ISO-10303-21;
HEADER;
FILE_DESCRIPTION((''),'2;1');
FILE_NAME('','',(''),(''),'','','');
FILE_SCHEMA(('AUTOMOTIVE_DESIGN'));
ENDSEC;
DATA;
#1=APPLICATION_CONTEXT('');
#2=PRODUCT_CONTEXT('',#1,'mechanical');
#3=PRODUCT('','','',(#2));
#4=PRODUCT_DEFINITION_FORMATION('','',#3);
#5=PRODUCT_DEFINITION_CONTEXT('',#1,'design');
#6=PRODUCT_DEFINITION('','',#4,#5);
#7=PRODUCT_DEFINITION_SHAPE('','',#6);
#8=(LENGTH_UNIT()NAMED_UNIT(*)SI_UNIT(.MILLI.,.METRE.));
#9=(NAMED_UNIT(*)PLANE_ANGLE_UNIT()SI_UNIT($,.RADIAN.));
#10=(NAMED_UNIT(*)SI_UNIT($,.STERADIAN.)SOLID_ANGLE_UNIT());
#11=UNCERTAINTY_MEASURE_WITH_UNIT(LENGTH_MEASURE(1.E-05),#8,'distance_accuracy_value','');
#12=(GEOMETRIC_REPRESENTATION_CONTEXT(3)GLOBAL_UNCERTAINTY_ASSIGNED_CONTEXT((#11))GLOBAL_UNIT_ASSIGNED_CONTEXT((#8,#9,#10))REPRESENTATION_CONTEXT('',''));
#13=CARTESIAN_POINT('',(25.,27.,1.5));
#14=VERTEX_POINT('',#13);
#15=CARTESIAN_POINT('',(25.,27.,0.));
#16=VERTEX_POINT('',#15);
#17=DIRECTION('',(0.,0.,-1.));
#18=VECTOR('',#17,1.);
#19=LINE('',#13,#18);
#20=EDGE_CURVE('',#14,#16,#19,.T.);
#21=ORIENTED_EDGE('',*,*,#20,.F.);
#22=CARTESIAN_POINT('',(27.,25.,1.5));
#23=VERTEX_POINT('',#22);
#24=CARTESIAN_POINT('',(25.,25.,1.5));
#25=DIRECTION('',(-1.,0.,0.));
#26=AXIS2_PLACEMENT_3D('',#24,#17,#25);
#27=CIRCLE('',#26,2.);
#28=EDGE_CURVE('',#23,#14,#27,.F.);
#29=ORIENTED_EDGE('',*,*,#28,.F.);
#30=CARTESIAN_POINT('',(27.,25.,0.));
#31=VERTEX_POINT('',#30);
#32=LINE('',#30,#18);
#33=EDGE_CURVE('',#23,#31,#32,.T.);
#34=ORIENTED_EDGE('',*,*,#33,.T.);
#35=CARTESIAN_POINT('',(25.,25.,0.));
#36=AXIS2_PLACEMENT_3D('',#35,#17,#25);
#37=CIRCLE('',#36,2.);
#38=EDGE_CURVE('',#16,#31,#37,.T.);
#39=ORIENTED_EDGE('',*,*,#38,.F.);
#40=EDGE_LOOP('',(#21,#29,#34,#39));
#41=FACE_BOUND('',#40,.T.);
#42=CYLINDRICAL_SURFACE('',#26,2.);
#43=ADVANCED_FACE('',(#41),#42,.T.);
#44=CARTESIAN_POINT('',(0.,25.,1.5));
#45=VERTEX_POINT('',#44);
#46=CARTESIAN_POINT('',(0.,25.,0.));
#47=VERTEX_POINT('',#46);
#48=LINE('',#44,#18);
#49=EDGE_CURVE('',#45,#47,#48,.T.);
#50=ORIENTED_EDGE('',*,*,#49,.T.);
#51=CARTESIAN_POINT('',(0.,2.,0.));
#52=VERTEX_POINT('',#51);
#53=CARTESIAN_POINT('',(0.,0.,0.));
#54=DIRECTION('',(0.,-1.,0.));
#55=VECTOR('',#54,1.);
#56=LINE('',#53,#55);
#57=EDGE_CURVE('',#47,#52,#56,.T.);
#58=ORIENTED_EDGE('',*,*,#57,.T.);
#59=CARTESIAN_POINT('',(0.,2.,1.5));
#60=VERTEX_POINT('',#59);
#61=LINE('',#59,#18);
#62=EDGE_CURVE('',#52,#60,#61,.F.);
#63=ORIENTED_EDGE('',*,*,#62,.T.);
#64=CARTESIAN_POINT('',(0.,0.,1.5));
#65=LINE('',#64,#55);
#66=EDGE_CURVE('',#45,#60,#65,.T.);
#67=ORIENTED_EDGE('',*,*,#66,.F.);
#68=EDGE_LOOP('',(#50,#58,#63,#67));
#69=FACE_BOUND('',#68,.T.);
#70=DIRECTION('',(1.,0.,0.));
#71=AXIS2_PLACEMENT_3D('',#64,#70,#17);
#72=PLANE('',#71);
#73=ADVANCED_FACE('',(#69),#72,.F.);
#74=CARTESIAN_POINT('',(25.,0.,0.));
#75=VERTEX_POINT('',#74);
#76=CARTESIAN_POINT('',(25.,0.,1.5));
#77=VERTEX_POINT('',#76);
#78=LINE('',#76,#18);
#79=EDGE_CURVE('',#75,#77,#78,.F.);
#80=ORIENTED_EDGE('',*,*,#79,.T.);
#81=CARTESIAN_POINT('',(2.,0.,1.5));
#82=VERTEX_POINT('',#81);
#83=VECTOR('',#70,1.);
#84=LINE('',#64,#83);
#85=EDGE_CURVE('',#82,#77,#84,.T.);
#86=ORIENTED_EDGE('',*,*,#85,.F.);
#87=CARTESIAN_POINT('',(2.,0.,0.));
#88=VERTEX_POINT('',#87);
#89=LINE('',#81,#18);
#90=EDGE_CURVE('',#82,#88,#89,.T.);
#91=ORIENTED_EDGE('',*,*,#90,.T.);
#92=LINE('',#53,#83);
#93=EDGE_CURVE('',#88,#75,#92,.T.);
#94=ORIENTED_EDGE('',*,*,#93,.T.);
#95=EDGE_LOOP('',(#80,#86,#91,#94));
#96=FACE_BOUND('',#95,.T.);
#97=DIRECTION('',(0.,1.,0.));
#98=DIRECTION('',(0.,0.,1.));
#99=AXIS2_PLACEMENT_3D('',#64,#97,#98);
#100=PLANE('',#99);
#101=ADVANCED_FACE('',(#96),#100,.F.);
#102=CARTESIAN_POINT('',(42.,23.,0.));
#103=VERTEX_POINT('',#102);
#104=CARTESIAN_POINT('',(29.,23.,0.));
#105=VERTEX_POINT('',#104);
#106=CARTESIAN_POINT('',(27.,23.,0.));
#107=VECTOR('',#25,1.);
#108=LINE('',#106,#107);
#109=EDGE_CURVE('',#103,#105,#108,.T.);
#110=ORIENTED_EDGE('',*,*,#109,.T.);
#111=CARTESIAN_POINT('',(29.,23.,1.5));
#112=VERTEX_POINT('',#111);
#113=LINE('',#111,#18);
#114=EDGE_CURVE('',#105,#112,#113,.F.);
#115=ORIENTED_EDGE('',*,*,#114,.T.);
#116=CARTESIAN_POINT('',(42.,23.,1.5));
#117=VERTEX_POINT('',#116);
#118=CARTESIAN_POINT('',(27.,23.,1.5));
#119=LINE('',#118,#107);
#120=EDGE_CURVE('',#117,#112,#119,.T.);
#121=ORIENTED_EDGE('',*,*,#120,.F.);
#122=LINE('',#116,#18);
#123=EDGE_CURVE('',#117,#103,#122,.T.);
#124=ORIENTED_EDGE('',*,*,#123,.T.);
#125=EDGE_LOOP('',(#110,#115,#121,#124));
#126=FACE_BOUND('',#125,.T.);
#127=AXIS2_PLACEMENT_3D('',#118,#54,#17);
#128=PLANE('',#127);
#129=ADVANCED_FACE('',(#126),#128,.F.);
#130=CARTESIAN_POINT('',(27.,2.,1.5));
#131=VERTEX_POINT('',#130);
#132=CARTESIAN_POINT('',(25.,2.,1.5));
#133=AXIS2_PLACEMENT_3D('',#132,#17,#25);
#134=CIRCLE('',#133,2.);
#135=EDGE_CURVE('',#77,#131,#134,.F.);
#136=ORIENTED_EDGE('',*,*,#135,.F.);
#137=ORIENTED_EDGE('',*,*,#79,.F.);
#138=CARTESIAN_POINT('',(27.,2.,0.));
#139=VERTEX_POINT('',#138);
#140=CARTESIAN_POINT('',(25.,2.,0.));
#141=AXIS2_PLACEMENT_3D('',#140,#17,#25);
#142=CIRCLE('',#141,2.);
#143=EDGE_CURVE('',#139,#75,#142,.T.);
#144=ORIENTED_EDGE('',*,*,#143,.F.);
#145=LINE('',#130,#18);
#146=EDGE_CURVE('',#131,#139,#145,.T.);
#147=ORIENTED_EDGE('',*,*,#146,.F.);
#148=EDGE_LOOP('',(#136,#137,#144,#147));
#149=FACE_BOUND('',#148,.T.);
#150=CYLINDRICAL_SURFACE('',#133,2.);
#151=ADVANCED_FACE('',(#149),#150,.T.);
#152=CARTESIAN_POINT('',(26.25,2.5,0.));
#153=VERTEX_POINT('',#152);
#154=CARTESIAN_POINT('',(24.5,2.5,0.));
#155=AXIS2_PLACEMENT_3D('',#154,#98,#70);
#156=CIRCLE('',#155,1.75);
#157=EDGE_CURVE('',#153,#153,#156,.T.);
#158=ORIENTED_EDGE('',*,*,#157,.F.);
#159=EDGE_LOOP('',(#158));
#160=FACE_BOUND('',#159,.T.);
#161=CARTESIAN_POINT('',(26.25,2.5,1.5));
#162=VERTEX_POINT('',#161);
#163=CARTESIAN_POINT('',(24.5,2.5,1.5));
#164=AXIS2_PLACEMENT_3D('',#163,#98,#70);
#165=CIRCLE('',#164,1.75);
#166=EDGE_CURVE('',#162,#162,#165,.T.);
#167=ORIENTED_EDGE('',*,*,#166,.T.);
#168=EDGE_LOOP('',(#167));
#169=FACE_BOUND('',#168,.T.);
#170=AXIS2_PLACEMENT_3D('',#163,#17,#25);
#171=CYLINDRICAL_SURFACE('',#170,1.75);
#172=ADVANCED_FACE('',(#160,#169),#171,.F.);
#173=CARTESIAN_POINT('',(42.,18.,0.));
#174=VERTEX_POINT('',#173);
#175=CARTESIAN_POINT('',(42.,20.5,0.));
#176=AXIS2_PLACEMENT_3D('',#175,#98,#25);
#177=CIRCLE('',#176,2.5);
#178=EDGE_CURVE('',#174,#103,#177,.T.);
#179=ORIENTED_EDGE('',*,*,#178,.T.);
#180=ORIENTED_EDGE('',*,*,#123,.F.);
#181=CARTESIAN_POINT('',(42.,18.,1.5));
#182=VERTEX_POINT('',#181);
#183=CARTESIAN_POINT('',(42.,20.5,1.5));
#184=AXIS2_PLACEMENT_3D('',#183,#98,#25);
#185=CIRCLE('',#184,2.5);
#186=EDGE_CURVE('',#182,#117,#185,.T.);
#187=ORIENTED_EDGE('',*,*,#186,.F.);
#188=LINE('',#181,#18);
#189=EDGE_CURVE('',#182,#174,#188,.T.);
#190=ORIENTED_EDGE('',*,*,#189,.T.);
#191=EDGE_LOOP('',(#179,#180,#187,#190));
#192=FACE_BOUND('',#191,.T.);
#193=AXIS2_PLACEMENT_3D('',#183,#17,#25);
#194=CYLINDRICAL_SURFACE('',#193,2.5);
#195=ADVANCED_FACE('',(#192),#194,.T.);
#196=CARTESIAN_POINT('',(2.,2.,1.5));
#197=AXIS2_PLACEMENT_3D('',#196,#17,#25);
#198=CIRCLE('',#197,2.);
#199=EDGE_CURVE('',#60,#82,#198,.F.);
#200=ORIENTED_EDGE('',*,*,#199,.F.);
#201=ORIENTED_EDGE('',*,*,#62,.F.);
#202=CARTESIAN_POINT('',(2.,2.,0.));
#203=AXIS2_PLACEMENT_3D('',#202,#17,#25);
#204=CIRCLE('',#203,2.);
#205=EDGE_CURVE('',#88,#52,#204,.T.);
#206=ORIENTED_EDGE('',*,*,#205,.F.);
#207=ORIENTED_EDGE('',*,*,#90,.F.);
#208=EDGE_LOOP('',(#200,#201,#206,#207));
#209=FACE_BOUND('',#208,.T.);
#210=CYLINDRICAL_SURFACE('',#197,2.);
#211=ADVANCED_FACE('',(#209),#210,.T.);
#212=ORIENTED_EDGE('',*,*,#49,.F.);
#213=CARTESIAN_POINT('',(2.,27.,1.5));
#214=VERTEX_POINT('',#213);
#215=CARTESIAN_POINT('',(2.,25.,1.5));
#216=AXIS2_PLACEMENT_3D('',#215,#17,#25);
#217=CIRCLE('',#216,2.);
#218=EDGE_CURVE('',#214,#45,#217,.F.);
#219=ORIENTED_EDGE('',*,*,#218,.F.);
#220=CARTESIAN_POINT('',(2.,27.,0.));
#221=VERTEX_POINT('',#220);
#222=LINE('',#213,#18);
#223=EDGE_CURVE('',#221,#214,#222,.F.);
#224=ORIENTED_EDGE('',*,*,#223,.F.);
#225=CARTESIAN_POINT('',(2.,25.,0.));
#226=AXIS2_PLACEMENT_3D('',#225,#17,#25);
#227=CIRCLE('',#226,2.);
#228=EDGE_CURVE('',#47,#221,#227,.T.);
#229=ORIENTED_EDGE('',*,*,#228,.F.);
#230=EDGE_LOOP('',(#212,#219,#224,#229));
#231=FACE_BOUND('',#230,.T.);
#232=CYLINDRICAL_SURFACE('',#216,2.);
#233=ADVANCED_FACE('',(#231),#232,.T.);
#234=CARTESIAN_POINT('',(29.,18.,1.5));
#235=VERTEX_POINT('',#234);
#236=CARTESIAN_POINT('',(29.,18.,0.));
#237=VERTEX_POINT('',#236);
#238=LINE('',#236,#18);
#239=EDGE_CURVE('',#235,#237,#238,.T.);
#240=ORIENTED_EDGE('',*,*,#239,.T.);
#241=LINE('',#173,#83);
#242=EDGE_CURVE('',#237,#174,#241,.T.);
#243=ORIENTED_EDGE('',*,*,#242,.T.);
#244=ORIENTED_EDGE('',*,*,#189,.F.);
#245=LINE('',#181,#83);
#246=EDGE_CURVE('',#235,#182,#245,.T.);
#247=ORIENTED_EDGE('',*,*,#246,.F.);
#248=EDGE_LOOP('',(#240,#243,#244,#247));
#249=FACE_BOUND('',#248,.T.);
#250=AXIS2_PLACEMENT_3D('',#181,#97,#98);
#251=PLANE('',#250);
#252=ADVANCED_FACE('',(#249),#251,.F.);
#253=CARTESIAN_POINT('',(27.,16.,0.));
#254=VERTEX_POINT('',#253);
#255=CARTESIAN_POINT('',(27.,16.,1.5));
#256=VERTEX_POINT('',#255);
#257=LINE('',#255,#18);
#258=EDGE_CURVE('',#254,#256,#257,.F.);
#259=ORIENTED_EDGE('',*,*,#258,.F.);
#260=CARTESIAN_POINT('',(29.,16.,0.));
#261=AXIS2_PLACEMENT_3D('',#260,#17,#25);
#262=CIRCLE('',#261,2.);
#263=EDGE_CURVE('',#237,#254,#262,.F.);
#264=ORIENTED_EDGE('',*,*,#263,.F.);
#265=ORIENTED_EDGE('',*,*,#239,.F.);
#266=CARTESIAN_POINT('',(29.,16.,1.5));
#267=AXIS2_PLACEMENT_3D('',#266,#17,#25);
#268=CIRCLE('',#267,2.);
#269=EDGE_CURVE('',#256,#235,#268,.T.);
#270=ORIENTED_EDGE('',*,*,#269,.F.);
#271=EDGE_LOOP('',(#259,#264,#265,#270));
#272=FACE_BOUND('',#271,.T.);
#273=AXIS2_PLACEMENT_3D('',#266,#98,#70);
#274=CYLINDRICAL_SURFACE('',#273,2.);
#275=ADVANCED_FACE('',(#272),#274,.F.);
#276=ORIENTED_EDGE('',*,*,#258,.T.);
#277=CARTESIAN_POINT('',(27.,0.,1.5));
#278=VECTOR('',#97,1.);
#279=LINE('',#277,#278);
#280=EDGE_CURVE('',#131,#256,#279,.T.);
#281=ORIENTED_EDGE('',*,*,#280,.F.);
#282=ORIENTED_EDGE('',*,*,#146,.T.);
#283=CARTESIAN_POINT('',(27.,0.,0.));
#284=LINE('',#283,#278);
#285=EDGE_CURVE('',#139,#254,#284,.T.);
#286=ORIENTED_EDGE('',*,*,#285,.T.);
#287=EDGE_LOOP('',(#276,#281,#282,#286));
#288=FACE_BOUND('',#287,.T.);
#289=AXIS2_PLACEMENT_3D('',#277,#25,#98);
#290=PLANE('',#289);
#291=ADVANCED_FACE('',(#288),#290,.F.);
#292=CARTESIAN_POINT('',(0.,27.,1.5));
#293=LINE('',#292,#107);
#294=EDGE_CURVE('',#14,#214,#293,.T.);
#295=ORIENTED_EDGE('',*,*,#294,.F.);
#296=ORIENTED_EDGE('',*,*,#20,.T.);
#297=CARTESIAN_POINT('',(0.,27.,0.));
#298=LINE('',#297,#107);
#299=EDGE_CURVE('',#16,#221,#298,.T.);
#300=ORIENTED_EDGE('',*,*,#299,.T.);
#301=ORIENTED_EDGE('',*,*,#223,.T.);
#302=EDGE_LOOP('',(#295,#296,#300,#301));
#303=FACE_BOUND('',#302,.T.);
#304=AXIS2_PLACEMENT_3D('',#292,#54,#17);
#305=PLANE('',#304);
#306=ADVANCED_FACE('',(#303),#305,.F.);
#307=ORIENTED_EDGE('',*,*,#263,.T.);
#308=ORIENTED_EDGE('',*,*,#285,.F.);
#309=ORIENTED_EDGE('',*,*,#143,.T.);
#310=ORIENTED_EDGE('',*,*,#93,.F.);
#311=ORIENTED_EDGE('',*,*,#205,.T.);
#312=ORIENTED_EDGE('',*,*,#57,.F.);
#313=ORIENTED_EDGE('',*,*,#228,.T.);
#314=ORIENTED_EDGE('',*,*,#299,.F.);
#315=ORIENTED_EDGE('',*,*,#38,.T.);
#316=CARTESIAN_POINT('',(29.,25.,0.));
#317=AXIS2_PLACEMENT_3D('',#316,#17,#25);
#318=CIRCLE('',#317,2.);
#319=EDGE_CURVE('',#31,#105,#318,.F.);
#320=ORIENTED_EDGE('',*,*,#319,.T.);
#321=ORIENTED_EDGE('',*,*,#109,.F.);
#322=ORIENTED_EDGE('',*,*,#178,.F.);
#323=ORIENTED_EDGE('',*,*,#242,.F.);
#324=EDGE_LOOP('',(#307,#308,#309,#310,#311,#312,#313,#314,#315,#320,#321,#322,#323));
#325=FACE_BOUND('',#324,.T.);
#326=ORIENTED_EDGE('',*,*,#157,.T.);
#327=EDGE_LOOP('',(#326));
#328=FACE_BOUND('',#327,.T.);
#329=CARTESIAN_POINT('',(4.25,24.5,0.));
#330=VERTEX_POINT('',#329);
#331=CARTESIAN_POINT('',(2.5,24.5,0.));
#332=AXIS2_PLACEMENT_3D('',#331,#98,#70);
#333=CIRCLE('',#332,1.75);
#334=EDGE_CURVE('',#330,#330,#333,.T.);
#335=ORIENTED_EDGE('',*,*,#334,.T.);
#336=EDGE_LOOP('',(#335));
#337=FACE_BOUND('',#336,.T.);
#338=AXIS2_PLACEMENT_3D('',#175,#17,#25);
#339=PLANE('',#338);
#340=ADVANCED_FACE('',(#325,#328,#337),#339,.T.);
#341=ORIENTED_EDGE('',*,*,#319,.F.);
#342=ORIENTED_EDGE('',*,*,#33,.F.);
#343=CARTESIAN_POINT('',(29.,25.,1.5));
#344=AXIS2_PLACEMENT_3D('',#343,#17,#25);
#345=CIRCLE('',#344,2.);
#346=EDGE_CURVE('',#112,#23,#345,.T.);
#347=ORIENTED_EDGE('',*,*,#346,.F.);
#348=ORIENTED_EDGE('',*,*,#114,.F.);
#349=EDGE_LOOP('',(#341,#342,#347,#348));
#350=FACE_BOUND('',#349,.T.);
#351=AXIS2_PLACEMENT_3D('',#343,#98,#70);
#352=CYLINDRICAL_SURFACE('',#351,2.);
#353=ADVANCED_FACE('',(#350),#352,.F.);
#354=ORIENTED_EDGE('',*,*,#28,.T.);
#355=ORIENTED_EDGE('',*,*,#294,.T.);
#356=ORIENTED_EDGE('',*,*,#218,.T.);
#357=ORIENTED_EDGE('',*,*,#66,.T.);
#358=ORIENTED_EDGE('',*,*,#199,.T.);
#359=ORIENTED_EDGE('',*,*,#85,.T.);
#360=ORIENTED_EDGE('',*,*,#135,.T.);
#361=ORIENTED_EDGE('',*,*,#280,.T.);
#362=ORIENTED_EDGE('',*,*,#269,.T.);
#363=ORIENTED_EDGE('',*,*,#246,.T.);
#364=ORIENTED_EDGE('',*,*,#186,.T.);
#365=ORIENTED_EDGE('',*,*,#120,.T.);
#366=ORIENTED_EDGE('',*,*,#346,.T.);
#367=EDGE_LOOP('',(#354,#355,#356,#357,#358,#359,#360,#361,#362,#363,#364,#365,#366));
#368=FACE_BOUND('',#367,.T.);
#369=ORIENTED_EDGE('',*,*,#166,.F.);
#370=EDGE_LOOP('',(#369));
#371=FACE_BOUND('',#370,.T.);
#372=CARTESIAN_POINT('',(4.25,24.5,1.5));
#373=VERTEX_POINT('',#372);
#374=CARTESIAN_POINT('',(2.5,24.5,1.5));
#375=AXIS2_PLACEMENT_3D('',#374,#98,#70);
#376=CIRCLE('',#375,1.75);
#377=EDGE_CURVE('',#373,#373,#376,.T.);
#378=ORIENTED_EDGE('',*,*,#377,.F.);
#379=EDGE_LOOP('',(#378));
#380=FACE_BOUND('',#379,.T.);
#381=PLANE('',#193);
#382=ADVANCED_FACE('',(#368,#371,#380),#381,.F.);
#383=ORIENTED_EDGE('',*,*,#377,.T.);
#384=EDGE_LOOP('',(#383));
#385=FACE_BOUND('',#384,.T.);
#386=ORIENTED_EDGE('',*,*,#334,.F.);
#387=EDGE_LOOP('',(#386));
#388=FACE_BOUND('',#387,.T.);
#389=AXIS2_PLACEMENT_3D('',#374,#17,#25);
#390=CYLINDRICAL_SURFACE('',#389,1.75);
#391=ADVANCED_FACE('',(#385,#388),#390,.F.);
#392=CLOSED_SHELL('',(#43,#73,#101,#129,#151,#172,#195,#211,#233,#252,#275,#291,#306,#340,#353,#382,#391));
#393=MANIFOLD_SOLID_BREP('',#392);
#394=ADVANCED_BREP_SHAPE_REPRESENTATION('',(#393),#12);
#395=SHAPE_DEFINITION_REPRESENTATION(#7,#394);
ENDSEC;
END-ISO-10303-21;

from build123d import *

# Parameters (mm, degrees)
ESQUISSE1_R        = 1.75
BOSS_EXTRU_1_DEPTH = 1.5
CONG_1_R           = 2


with BuildPart() as part:
    # Esquisse1 → Boss.-Extru.1 (new body)
    with BuildSketch(Plane.XY):
        with BuildLine():
            Line((0, 0), (27, 0))
            Line((27, 0), (27, 18))
            Line((27, 18), (42, 18))
            ThreePointArc((42, 18), (44.5, 20.5), (42, 23))
            Line((42, 23), (27, 23))
            Line((27, 23), (27, 27))
            Line((27, 27), (0, 27))
            Line((0, 27), (0, 0))
        make_face()
        with Locations((2.5, 24.5)):
            Circle(ESQUISSE1_R, mode=Mode.SUBTRACT)
        with Locations((24.5, 2.5)):
            Circle(ESQUISSE1_R, mode=Mode.SUBTRACT)
    extrude(amount=BOSS_EXTRU_1_DEPTH)

    # Congé1
    cong_1_edges = [part.edges().sort_by_distance(p)[0] for p in [
        (27, 23, 0.75),
        (27, 18, 0.75),
        (27, 0, 0.75),
        (0, 0, 0.75),
        (0, 27, 0.75),
        (27, 27, 0.75),
    ]]
    fillet(cong_1_edges, radius=CONG_1_R - 0.0001)  # a hair under: the kernel refuses the full size


solid = part.part
